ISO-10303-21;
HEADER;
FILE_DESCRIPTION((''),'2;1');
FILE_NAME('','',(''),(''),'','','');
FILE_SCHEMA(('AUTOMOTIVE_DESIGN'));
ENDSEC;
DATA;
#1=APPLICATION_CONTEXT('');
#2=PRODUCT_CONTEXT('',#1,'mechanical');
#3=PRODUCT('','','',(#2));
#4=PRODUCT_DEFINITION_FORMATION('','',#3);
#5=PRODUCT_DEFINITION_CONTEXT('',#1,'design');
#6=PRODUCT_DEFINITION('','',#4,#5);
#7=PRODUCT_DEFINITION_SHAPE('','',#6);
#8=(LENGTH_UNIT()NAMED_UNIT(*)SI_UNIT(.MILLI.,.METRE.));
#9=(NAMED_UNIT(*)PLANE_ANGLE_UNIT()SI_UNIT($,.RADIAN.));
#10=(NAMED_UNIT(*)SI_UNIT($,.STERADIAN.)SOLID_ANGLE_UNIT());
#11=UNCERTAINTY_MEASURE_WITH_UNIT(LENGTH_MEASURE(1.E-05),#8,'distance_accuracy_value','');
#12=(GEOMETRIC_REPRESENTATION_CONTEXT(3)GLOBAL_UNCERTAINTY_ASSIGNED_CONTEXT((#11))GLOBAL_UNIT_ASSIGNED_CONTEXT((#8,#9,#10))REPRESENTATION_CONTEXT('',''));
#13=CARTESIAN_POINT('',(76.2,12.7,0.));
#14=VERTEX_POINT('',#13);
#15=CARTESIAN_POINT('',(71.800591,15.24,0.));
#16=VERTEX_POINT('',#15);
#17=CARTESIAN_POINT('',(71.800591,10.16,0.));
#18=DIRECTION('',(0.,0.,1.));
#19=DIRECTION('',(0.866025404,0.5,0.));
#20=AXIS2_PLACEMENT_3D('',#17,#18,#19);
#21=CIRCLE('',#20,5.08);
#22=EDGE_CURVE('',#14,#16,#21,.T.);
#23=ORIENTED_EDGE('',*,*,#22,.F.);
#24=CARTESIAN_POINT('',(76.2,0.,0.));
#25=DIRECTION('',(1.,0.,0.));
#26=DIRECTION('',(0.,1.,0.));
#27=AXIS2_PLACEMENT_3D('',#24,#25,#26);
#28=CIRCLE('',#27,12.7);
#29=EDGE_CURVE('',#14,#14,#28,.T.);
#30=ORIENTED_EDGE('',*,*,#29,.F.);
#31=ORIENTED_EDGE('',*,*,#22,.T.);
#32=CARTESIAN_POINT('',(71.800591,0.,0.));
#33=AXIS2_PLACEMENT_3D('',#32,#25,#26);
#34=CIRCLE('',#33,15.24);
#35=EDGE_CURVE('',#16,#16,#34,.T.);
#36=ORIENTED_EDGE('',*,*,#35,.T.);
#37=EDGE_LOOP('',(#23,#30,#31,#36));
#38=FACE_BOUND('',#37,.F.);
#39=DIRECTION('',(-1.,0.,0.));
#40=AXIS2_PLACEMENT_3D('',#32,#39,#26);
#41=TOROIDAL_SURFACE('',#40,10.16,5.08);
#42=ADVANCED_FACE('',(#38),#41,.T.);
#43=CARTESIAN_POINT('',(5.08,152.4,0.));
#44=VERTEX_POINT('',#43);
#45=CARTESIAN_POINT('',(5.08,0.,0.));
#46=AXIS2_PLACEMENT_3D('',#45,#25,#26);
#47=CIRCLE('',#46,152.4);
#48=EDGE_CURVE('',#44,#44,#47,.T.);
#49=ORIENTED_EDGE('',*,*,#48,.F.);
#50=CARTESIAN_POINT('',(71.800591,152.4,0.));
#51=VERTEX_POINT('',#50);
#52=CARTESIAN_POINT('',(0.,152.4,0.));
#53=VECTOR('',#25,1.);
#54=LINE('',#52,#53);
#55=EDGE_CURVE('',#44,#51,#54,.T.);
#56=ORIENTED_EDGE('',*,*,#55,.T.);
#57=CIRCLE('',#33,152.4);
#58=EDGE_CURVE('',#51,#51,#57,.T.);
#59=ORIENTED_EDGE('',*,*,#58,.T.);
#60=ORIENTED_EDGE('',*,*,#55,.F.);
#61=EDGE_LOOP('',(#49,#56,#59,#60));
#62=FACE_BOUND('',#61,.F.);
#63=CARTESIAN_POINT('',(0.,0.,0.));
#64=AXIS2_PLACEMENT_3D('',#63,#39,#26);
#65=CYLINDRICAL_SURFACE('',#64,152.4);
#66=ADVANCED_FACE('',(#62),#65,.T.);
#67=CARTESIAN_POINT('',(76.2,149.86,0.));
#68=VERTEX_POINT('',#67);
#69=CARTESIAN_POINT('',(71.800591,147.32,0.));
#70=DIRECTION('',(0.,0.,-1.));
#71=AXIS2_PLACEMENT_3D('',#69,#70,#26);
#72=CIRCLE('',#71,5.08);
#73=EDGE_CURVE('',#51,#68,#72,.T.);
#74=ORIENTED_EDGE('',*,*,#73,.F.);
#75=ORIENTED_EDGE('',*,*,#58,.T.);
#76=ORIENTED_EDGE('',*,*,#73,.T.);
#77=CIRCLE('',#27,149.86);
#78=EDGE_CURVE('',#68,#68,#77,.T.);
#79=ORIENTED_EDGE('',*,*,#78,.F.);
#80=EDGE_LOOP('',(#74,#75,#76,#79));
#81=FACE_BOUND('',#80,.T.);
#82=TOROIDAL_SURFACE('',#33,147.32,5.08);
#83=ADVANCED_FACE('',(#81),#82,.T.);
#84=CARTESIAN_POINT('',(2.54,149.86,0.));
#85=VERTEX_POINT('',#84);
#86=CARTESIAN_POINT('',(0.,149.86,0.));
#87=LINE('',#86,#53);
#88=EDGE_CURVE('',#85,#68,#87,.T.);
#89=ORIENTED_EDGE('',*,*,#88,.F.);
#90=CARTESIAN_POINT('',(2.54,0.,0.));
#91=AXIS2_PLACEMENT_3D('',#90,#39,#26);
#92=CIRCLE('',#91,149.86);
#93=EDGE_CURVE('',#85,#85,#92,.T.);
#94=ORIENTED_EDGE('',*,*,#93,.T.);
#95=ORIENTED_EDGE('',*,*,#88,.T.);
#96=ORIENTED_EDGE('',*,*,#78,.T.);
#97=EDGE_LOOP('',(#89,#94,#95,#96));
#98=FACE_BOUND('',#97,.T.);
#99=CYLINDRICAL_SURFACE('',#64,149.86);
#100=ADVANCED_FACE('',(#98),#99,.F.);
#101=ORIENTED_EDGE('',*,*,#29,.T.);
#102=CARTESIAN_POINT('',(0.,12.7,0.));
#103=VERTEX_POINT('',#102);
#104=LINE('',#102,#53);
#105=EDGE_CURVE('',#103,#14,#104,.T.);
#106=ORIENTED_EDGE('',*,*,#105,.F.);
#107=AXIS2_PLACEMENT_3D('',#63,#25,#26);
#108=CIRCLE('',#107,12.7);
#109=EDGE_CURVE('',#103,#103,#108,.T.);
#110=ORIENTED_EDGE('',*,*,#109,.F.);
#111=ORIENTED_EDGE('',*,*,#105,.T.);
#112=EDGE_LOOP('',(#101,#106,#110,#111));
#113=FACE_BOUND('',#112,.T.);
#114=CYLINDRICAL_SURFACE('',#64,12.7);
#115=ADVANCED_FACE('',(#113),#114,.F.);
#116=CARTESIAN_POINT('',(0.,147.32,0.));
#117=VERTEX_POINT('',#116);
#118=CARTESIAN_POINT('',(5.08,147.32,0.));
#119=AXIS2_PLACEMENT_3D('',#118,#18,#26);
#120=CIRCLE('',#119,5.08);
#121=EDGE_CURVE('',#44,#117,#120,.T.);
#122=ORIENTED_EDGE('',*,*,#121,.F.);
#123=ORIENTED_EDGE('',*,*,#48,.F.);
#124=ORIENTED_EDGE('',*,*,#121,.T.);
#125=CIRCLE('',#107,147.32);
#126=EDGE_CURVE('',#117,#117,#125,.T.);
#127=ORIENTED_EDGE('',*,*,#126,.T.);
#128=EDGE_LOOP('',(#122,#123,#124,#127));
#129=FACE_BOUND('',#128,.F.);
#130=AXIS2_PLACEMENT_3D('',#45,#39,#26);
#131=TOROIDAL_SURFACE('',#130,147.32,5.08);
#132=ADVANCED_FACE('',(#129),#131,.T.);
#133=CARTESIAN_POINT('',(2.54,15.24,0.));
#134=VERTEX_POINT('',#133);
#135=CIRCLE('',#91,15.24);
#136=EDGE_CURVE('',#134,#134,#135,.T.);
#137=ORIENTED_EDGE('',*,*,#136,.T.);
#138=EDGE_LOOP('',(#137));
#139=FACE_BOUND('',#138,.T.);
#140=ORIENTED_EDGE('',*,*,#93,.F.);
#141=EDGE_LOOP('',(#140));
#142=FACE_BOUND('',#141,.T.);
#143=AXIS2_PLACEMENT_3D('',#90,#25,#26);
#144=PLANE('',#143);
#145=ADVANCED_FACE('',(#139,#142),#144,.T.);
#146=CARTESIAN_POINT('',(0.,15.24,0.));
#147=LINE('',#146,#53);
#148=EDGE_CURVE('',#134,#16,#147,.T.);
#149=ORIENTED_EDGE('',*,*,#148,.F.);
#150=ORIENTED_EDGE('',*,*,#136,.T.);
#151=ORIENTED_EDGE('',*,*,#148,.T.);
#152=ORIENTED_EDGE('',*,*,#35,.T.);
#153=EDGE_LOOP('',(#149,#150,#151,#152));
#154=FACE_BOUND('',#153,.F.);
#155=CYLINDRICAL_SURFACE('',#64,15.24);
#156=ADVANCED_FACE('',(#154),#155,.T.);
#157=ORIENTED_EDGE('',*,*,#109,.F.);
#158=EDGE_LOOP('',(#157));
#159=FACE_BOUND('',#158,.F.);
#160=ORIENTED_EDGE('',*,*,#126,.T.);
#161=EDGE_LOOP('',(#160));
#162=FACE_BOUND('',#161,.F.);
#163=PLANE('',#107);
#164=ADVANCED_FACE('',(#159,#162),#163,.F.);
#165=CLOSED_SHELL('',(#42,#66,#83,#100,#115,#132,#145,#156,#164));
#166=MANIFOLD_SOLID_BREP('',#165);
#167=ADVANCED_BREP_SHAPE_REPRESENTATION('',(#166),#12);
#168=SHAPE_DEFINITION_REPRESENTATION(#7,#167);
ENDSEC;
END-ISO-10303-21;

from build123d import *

# Parameters (mm, degrees)
F0_R     = 152.4
F0_R_2   = 12.7
F1_DEPTH = 76.2
F2_T     = -2.54
F4_R     = 5.08


# Not quite as in the source:
# - a fillet or chamfer that OpenCascade refuses, or shapes differently, is made with other operations: its cross-section is extruded or revolved along the edge and cut away or added


with BuildPart() as f1:
    # F0 (on Right) → F1 (new body)
    with BuildSketch(Plane.YZ):
        Circle(F0_R)
        Circle(F0_R_2, mode=Mode.SUBTRACT)
    extrude(amount=F1_DEPTH)

    # F2
    f2_openings = [f1.faces().sort_by_distance(p)[0] for p in [
        (76.2, -148.089477, 0),
    ]]
    offset(amount=F2_T, openings=f2_openings)

    # F3: fillet of radius 5.08 on 2 edges, made by hand

    # F3_s1 → F3_t2 (revolve, cut)
    with BuildSketch(Plane.XY):
        with BuildLine():
            ThreePointArc((71.8005909488, 152.4), (74.3405909488, 151.7194090512), (76.2, 149.86))
            Line((76.2, 149.86), (76.2, 152.4))
            Line((76.2, 152.4), (71.8005909488, 152.4))
        make_face()
    revolve(axis=Axis((76.2, 0, 0), (1, 0, 0)), mode=Mode.SUBTRACT)

    # F3_s3 → F3_t4 (revolve, cut)
    with BuildSketch(Plane.XY):
        with BuildLine():
            ThreePointArc((76.2, 12.7), (74.3405909488, 14.5594090512), (71.8005909488, 15.24))
            Line((71.8005909488, 15.24), (76.2, 15.24))
            Line((76.2, 15.24), (76.2, 12.7))
        make_face()
    revolve(axis=Axis((76.2, 0, 0), (1, 0, 0)), mode=Mode.SUBTRACT)

    # F4
    f4_edges = [f1.edges().sort_by_distance(p)[0] for p in [
        (0, -152.4, 0),
        (35.900295, 152.4, 0),
        (71.800591, -152.4, 0),
    ]]
    fillet(f4_edges, radius=F4_R)


solid = f1.part
